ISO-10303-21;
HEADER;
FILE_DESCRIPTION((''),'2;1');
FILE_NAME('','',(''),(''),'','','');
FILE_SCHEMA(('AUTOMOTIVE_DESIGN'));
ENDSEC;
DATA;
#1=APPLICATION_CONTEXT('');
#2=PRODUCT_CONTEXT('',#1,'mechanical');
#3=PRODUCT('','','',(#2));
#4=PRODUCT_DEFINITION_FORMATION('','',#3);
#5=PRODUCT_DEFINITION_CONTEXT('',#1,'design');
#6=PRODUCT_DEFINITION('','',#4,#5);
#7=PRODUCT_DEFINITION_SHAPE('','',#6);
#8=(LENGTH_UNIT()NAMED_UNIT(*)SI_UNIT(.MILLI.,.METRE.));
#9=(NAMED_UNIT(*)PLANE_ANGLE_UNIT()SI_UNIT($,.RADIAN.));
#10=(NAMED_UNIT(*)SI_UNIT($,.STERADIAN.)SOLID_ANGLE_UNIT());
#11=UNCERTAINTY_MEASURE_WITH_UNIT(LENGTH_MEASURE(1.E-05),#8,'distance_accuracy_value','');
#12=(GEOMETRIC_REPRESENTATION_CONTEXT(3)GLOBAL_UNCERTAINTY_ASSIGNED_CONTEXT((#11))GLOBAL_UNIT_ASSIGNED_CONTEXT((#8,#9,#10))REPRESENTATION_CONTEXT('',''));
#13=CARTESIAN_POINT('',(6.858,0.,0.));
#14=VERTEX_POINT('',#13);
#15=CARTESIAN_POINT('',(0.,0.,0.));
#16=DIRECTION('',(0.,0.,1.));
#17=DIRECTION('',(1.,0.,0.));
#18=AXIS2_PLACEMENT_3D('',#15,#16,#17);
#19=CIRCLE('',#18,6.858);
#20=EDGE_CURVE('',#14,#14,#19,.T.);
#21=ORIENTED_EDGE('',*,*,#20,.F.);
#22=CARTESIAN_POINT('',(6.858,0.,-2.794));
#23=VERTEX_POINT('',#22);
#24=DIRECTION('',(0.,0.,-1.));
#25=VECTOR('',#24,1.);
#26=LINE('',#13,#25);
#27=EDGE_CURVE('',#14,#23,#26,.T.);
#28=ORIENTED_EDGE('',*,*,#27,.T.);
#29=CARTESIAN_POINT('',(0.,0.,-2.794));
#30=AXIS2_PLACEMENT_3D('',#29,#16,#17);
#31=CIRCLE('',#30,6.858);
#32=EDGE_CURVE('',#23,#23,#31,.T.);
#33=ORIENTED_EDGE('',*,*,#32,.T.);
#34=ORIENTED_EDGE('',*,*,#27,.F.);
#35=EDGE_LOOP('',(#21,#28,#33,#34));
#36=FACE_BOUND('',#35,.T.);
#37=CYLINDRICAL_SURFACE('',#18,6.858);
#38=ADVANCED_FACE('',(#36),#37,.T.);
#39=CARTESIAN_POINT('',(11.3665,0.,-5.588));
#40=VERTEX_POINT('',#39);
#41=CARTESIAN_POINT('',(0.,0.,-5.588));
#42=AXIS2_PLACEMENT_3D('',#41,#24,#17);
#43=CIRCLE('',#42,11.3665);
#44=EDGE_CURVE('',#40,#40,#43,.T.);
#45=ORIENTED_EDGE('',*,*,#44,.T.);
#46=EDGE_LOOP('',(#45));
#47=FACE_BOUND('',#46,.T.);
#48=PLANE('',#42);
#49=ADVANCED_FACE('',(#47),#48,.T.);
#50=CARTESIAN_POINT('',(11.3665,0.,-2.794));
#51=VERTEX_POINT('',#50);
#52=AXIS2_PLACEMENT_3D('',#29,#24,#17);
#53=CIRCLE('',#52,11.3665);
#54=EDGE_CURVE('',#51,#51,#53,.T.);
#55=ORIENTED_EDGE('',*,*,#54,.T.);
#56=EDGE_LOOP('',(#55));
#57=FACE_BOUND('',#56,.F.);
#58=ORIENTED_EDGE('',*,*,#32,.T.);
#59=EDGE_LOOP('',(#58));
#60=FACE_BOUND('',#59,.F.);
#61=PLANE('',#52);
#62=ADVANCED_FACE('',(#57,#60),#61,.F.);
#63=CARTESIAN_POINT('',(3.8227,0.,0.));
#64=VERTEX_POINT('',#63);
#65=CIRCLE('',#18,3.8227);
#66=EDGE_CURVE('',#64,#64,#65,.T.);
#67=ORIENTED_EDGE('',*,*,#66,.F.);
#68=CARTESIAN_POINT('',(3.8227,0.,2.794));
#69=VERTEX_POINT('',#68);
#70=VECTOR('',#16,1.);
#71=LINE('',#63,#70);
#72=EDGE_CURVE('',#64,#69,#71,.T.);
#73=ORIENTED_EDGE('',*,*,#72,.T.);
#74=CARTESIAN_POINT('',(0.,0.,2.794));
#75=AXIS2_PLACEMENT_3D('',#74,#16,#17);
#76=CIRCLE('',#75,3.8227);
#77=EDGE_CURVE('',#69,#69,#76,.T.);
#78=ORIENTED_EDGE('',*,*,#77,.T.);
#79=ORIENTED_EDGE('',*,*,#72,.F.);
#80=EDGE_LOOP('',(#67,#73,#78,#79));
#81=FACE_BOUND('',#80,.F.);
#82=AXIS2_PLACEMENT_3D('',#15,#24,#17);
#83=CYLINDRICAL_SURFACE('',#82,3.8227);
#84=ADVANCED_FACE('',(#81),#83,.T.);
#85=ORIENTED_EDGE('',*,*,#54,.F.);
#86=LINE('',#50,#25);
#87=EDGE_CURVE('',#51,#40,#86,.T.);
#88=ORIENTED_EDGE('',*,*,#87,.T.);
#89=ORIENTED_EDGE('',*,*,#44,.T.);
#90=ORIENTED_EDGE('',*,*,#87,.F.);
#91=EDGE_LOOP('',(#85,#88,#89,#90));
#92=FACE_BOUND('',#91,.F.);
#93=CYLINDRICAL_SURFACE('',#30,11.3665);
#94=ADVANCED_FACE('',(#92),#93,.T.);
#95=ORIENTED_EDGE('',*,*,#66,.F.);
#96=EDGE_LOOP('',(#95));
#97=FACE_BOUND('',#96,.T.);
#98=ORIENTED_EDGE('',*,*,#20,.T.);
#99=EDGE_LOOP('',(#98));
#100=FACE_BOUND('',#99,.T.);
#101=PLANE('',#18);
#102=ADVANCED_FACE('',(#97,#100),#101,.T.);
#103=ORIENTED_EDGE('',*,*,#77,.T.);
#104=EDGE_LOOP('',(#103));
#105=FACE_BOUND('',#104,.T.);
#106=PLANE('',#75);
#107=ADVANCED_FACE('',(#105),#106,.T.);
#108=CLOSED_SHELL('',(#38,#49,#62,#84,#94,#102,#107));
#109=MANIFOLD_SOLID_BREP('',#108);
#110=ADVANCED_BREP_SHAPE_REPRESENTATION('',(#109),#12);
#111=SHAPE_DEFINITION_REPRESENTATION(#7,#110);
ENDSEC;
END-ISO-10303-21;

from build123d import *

# Parameters (mm, degrees)
F0_R     = 3.8227
F1_DEPTH = 2.794
F0_R_2   = 6.858
F2_DEPTH = 2.794
F3_R     = 11.3665
F3_R_2   = 6.858
F4_DEPTH = 2.794


with BuildPart() as f1:
    # F0 (on Top) → F1 (new body)
    with BuildSketch(Plane.XY):
        Circle(F0_R)
    extrude(amount=F1_DEPTH)

    # F0 (on Top) → F2 (join)
    with BuildSketch(Plane.XY):
        Circle(F0_R_2)
        Circle(F0_R, mode=Mode.SUBTRACT)
        Circle(F0_R)
    extrude(amount=-F2_DEPTH)

    # F3 (on face) → F4 (join)
    with BuildSketch(Plane(origin=(0, 0, -2.794), x_dir=(1, 0, 0), z_dir=(0, 0, -1))):
        Circle(F3_R)
        Circle(F3_R_2, mode=Mode.SUBTRACT)
        Circle(F3_R_2)
    extrude(amount=F4_DEPTH)


solid = f1.part
